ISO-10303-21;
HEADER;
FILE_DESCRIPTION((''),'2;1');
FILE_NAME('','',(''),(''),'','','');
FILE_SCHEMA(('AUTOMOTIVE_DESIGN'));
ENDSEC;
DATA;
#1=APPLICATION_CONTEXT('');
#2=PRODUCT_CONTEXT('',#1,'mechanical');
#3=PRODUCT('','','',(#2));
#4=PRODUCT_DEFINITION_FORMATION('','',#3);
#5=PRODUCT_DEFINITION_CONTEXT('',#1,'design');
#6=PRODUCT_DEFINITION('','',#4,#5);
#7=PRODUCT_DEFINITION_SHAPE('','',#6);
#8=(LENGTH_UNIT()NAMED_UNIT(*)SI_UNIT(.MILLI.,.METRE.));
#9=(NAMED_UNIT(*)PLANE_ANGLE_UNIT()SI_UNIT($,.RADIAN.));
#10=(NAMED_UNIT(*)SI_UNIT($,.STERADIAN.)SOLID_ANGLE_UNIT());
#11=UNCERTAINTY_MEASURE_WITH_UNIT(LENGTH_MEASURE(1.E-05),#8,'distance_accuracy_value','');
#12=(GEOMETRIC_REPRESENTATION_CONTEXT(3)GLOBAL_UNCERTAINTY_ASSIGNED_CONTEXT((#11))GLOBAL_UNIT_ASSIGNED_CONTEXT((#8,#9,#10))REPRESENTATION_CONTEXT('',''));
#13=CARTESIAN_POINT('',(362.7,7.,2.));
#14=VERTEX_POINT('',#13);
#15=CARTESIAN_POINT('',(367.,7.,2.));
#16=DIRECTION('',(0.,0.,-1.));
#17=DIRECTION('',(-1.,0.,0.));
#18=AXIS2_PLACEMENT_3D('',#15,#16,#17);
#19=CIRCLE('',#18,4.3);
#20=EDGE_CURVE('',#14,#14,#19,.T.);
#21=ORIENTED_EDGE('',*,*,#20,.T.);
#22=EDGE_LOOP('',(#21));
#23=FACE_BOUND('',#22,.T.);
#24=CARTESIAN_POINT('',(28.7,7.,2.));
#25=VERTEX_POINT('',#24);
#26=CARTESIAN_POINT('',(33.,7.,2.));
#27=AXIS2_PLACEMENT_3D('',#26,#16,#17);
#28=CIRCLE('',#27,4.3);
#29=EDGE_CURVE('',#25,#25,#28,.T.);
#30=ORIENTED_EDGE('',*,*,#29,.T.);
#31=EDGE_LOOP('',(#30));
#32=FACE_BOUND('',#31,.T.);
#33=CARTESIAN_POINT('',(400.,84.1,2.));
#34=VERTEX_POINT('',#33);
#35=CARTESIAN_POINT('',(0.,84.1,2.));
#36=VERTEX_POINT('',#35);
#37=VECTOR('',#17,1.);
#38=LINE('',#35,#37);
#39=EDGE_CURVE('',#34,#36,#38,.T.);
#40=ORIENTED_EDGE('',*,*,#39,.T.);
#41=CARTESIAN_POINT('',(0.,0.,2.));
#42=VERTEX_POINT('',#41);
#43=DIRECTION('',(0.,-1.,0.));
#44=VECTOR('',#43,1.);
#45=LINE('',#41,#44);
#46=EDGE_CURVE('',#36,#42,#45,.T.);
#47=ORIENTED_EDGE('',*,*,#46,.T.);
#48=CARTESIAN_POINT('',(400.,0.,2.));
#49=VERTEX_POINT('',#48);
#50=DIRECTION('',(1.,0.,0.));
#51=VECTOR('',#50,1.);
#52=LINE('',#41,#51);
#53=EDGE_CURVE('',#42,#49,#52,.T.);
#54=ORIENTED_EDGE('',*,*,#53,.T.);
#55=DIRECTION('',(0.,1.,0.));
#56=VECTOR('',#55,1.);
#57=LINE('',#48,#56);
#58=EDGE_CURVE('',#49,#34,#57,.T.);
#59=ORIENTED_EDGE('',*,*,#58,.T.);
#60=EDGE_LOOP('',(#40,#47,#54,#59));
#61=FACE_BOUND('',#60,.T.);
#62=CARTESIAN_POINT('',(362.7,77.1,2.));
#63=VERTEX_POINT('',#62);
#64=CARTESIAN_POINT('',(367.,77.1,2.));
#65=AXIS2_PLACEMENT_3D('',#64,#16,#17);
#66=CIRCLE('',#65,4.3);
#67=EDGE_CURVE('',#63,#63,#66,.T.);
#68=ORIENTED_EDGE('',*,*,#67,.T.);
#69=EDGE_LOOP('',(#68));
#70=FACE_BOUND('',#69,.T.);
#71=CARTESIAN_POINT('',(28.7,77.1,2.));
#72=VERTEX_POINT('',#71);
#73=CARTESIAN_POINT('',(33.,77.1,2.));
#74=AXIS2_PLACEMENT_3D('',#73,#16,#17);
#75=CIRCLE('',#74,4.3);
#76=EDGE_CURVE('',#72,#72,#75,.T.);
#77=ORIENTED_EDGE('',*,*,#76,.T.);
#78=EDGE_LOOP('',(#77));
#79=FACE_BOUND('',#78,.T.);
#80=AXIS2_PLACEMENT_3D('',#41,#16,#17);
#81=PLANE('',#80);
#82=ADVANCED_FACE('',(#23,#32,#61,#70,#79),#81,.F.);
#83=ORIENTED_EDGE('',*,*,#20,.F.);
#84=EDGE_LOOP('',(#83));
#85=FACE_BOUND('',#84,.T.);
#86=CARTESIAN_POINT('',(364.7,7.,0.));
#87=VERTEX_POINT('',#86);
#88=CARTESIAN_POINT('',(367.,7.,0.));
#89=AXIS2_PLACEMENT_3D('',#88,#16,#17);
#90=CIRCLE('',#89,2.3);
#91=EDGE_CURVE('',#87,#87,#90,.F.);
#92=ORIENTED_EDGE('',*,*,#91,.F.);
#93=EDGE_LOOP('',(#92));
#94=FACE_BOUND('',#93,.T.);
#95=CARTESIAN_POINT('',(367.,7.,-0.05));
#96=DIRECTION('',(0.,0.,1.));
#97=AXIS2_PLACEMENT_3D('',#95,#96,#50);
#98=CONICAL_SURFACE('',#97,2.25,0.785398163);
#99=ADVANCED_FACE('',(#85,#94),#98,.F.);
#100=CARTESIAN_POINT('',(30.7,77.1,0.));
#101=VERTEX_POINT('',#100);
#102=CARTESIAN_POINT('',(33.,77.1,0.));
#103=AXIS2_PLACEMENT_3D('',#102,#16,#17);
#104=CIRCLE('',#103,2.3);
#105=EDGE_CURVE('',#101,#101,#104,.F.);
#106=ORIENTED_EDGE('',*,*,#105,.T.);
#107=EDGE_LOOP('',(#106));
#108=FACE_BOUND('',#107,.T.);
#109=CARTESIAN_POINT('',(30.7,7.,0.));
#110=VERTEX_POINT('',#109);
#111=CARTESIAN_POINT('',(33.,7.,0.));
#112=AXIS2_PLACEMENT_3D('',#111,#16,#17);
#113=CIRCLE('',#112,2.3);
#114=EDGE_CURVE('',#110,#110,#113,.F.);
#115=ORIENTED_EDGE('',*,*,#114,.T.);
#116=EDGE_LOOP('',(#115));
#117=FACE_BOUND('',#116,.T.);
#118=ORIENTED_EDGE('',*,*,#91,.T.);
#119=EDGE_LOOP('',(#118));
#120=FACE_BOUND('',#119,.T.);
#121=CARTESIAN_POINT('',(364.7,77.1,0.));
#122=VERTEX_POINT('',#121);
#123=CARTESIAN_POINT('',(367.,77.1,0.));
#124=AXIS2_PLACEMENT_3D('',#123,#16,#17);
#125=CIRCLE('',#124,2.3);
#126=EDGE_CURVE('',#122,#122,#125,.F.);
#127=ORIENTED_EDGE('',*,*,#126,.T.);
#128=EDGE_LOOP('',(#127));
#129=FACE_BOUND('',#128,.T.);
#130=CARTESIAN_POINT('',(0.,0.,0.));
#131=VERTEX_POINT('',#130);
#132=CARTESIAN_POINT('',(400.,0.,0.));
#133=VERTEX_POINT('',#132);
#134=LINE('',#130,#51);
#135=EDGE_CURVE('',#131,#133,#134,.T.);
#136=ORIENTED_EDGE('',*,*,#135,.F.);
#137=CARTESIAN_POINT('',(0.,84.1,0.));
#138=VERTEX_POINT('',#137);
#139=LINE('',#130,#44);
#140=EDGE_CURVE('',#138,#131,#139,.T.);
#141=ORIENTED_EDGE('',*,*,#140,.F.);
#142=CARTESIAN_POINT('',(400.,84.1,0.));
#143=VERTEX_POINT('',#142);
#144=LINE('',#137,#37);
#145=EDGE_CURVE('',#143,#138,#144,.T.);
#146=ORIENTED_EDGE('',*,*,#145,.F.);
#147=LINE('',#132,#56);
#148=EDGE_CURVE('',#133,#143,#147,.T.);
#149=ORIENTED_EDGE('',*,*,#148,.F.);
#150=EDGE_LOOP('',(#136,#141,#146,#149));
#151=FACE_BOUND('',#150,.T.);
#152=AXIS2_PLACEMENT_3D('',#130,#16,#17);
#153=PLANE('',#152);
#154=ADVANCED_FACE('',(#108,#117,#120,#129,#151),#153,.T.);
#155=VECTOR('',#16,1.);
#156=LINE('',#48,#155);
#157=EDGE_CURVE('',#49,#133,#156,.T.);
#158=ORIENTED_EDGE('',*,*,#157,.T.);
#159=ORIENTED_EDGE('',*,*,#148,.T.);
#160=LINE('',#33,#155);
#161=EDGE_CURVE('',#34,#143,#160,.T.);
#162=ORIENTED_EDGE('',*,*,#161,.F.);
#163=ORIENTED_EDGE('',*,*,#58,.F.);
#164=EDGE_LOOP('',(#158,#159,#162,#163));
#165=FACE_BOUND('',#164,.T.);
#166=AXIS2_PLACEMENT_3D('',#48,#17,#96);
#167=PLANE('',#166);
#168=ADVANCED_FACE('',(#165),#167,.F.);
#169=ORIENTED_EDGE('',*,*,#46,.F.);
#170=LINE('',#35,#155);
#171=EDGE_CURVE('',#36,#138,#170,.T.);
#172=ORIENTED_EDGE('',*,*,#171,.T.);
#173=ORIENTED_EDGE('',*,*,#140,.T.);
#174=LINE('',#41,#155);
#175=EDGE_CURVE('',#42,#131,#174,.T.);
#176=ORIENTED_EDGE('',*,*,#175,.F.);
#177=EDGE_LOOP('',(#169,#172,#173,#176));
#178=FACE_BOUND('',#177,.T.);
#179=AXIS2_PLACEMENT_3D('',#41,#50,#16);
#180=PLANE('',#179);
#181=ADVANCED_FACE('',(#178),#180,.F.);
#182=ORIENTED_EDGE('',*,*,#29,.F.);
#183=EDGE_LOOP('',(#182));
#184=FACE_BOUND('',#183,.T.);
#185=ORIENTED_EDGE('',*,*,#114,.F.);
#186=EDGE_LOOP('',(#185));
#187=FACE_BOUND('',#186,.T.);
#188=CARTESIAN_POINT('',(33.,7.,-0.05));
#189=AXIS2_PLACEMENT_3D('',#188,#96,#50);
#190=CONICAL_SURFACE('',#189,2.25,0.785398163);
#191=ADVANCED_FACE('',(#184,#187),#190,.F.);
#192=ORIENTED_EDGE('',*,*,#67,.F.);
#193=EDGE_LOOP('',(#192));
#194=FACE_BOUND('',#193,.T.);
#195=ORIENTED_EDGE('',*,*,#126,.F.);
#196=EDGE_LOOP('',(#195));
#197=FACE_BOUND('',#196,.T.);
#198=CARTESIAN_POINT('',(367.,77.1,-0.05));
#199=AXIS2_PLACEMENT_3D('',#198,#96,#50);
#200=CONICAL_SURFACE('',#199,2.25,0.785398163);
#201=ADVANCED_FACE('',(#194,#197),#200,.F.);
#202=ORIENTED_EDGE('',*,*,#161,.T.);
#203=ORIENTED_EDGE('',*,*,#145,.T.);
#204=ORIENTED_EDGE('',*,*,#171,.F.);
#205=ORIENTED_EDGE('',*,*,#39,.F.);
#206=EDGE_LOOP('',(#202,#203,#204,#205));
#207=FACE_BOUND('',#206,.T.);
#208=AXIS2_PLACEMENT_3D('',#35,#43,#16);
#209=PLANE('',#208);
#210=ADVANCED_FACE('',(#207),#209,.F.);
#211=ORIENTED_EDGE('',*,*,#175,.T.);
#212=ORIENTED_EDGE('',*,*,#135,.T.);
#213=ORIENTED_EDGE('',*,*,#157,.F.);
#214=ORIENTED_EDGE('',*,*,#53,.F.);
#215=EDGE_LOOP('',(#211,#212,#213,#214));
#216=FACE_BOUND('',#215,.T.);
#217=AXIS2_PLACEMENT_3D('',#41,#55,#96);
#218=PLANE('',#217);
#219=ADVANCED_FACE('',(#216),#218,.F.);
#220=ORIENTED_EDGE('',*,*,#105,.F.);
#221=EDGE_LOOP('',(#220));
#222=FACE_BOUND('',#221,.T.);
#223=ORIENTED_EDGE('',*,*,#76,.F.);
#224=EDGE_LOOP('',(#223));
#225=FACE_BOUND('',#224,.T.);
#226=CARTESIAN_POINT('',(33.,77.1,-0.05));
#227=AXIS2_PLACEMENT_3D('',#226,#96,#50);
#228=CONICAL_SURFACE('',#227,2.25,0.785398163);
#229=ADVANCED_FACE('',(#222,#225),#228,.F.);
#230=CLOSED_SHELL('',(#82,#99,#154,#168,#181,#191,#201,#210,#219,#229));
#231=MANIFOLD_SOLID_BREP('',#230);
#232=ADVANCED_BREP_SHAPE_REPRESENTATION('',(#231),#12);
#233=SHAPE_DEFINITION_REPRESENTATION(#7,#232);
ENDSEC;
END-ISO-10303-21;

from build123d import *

# Parameters (mm, degrees)
SKETCH_1_W          = 400
SKETCH_1_H          = 84.1
EXTRUDE_1_DEPTH     = 2
SKETCH_2_R          = 2.25
CUT_EXTRUDE_1_DEPTH = 409.750302752
CHAMFER_1_SIZE      = 2.05


with BuildPart() as part:
    # Эскиз1 → Бобышка-Вытянуть1 (new body)
    with BuildSketch(Plane.XY):
        with Locations((200, 42.05)):
            Rectangle(SKETCH_1_W, SKETCH_1_H)
    extrude(amount=EXTRUDE_1_DEPTH)

    # Эскиз2 → Вырез-Вытянуть1 (cut, through all)
    with BuildSketch(Plane.XY.offset(2)):
        with Locations((33, 77.1)):
            Circle(SKETCH_2_R)
        with Locations((367, 77.1)):
            Circle(SKETCH_2_R)
        with Locations((367, 7)):
            Circle(SKETCH_2_R)
        with Locations((33, 7)):
            Circle(SKETCH_2_R)
    extrude(amount=-CUT_EXTRUDE_1_DEPTH, mode=Mode.SUBTRACT)

    # Фаска1
    # the kernel refuses this chamfer: 2.05 mm, written as the material it takes off along each edge
    with BuildSketch(Plane(origin=(367, 7, 2), x_dir=(1, 0, 0), z_dir=(0, -1, 0))) as chamfer_1_piece_1:
        Polygon((2.25 + CHAMFER_1_SIZE, 0), (2.25, -CHAMFER_1_SIZE), (2.25, 0), align=None)
    revolve(axis=Axis((367, 7, 2), (0, 0, 1)), mode=Mode.SUBTRACT)
    with BuildSketch(Plane(origin=(367, 77.1, 2), x_dir=(1, 0, 0), z_dir=(0, -1, 0))) as chamfer_1_piece_2:
        Polygon((2.25 + CHAMFER_1_SIZE, 0), (2.25, -CHAMFER_1_SIZE), (2.25, 0), align=None)
    revolve(axis=Axis((367, 77.1, 2), (0, 0, 1)), mode=Mode.SUBTRACT)
    with BuildSketch(Plane(origin=(33, 7, 2), x_dir=(1, 0, 0), z_dir=(0, -1, 0))) as chamfer_1_piece_3:
        Polygon((2.25 + CHAMFER_1_SIZE, 0), (2.25, -CHAMFER_1_SIZE), (2.25, 0), align=None)
    revolve(axis=Axis((33, 7, 2), (0, 0, 1)), mode=Mode.SUBTRACT)
    with BuildSketch(Plane(origin=(33, 77.1, 2), x_dir=(1, 0, 0), z_dir=(0, -1, 0))) as chamfer_1_piece_4:
        Polygon((2.25 + CHAMFER_1_SIZE, 0), (2.25, -CHAMFER_1_SIZE), (2.25, 0), align=None)
    revolve(axis=Axis((33, 77.1, 2), (0, 0, 1)), mode=Mode.SUBTRACT)


solid = part.part
